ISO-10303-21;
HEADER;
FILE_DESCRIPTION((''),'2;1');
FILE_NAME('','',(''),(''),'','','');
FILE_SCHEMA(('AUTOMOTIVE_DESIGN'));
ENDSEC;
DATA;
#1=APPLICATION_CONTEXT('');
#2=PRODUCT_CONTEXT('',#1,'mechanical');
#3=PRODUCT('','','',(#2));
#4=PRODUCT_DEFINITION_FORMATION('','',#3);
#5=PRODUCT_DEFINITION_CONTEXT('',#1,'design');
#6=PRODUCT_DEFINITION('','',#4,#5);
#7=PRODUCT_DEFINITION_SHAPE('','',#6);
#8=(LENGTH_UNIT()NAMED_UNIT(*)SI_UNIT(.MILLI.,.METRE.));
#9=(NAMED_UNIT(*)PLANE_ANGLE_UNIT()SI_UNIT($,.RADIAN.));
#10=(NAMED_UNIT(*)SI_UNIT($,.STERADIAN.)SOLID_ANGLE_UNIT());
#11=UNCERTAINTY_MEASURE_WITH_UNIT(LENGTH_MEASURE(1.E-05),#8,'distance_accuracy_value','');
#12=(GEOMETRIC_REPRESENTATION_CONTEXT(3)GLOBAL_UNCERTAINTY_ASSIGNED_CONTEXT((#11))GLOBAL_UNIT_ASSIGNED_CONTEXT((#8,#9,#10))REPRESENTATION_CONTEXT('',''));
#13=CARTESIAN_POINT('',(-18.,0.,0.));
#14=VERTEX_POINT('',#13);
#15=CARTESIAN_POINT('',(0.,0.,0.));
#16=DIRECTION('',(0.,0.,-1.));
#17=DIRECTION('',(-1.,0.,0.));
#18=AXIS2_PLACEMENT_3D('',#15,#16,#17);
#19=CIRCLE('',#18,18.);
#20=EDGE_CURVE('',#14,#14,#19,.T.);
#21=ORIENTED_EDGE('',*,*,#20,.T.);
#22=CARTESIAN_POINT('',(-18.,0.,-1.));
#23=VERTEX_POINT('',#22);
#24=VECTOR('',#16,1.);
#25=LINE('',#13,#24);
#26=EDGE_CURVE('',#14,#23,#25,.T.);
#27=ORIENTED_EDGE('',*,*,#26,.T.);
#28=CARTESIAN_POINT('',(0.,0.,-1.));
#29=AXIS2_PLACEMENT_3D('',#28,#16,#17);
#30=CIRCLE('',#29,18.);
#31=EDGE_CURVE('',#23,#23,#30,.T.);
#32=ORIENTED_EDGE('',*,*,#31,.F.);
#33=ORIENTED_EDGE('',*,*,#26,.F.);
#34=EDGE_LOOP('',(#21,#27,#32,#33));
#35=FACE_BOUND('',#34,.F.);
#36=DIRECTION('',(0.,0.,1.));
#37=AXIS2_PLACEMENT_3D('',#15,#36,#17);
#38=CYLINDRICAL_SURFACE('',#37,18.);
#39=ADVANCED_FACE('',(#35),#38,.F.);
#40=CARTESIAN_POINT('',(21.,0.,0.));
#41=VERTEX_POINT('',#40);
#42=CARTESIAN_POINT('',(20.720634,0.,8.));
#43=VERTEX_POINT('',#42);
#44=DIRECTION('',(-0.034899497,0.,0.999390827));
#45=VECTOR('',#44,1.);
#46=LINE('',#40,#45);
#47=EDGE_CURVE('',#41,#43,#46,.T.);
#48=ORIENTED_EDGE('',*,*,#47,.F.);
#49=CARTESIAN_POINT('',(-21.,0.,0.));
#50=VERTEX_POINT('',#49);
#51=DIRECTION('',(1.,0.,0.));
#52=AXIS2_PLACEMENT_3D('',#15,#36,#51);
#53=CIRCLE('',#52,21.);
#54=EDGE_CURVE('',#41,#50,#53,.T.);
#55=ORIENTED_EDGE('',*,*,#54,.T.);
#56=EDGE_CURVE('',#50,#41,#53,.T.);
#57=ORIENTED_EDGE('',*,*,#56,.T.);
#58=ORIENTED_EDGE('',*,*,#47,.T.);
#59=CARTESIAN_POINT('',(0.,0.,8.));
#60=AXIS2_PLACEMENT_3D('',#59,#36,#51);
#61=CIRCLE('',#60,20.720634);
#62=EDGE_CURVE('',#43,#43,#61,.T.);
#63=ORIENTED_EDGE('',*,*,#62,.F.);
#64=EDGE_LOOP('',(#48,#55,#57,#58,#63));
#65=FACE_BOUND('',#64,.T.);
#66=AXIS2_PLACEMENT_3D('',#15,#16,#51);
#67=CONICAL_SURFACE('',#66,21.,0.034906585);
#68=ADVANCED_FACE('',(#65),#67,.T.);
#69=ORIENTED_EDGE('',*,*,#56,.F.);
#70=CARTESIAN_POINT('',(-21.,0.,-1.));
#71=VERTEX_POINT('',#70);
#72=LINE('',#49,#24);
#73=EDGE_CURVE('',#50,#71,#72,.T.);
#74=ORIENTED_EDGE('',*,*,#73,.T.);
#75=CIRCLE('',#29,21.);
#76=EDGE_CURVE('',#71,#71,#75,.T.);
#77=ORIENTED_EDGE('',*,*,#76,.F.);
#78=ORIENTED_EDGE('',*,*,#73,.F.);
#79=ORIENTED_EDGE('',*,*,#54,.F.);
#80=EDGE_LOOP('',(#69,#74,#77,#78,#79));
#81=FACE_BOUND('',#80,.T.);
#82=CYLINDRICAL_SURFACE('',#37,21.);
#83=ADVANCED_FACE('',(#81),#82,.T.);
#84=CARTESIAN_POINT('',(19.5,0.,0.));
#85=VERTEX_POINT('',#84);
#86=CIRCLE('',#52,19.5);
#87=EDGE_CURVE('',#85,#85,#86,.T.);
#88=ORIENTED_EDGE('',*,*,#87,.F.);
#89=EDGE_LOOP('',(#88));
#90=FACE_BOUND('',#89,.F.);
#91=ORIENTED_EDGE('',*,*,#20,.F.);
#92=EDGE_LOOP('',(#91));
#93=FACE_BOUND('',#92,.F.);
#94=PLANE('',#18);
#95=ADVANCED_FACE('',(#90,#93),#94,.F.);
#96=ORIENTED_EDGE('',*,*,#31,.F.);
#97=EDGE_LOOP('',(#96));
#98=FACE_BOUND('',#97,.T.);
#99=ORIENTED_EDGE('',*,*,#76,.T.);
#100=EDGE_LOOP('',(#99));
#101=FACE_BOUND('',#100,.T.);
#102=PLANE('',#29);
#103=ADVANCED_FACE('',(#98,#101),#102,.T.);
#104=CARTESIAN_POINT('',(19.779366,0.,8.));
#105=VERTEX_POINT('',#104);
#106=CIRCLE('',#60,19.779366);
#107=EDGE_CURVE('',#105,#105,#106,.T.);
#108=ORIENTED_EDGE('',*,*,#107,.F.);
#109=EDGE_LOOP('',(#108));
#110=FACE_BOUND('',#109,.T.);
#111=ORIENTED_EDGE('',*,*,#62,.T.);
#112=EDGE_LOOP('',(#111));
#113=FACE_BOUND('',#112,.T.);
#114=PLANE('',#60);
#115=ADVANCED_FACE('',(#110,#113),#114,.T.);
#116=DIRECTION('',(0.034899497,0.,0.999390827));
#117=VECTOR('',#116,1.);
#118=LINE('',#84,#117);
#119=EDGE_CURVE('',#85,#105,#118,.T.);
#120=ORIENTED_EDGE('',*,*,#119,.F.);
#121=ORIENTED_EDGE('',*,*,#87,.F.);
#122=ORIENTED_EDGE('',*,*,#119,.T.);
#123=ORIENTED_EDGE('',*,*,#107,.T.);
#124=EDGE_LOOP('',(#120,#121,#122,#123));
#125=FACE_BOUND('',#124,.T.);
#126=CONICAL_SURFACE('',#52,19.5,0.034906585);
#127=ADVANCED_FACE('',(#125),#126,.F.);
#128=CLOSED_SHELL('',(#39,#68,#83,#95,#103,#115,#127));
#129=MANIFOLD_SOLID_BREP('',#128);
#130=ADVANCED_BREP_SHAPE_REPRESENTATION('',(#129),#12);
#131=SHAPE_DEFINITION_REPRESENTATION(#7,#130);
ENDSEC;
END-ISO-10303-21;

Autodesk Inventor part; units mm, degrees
ref_plane "YZ Plane" through (0, 0, 0) normal (1, 0, 0) x (0, 1, 0)
ref_plane "XZ Plane" through (0, 0, 0) normal (0, 1, 0) x (-1, 0, 0)
ref_plane "XY Plane" through (0, 0, 0) normal (0, 0, 1) x (1, 0, 0)
sketch "Skizze1" plane through (0, 0, 0) normal (0, 0, 1) x (1, 0, 0)
  circle A0 centre (0, 0) radius 19.5
  circle A1 centre (0, 0) radius 21
  dimension "d0" = 39
  dimension "d1" = 42
extrude "Extrusion1" add sketch "Skizze1" along normal blind 8 draft -2
sketch "Skizze2" plane through (0, 0, 0) normal (0, 0, -1) x (-1, 0, 0)
  circle A0 centre (0, 0) radius 19.6 projected
  circle A1 centre (0, 0) radius 21 projected
  circle A2 centre (0, 0) radius 18
  dimension "d4" = 36
extrude "Extrusion2" add sketch "Skizze2" along normal blind 1 contours A0 | A1
properties part number "00_Berrybase_CCTVLens_adapterring_50mm_to_100mm"
